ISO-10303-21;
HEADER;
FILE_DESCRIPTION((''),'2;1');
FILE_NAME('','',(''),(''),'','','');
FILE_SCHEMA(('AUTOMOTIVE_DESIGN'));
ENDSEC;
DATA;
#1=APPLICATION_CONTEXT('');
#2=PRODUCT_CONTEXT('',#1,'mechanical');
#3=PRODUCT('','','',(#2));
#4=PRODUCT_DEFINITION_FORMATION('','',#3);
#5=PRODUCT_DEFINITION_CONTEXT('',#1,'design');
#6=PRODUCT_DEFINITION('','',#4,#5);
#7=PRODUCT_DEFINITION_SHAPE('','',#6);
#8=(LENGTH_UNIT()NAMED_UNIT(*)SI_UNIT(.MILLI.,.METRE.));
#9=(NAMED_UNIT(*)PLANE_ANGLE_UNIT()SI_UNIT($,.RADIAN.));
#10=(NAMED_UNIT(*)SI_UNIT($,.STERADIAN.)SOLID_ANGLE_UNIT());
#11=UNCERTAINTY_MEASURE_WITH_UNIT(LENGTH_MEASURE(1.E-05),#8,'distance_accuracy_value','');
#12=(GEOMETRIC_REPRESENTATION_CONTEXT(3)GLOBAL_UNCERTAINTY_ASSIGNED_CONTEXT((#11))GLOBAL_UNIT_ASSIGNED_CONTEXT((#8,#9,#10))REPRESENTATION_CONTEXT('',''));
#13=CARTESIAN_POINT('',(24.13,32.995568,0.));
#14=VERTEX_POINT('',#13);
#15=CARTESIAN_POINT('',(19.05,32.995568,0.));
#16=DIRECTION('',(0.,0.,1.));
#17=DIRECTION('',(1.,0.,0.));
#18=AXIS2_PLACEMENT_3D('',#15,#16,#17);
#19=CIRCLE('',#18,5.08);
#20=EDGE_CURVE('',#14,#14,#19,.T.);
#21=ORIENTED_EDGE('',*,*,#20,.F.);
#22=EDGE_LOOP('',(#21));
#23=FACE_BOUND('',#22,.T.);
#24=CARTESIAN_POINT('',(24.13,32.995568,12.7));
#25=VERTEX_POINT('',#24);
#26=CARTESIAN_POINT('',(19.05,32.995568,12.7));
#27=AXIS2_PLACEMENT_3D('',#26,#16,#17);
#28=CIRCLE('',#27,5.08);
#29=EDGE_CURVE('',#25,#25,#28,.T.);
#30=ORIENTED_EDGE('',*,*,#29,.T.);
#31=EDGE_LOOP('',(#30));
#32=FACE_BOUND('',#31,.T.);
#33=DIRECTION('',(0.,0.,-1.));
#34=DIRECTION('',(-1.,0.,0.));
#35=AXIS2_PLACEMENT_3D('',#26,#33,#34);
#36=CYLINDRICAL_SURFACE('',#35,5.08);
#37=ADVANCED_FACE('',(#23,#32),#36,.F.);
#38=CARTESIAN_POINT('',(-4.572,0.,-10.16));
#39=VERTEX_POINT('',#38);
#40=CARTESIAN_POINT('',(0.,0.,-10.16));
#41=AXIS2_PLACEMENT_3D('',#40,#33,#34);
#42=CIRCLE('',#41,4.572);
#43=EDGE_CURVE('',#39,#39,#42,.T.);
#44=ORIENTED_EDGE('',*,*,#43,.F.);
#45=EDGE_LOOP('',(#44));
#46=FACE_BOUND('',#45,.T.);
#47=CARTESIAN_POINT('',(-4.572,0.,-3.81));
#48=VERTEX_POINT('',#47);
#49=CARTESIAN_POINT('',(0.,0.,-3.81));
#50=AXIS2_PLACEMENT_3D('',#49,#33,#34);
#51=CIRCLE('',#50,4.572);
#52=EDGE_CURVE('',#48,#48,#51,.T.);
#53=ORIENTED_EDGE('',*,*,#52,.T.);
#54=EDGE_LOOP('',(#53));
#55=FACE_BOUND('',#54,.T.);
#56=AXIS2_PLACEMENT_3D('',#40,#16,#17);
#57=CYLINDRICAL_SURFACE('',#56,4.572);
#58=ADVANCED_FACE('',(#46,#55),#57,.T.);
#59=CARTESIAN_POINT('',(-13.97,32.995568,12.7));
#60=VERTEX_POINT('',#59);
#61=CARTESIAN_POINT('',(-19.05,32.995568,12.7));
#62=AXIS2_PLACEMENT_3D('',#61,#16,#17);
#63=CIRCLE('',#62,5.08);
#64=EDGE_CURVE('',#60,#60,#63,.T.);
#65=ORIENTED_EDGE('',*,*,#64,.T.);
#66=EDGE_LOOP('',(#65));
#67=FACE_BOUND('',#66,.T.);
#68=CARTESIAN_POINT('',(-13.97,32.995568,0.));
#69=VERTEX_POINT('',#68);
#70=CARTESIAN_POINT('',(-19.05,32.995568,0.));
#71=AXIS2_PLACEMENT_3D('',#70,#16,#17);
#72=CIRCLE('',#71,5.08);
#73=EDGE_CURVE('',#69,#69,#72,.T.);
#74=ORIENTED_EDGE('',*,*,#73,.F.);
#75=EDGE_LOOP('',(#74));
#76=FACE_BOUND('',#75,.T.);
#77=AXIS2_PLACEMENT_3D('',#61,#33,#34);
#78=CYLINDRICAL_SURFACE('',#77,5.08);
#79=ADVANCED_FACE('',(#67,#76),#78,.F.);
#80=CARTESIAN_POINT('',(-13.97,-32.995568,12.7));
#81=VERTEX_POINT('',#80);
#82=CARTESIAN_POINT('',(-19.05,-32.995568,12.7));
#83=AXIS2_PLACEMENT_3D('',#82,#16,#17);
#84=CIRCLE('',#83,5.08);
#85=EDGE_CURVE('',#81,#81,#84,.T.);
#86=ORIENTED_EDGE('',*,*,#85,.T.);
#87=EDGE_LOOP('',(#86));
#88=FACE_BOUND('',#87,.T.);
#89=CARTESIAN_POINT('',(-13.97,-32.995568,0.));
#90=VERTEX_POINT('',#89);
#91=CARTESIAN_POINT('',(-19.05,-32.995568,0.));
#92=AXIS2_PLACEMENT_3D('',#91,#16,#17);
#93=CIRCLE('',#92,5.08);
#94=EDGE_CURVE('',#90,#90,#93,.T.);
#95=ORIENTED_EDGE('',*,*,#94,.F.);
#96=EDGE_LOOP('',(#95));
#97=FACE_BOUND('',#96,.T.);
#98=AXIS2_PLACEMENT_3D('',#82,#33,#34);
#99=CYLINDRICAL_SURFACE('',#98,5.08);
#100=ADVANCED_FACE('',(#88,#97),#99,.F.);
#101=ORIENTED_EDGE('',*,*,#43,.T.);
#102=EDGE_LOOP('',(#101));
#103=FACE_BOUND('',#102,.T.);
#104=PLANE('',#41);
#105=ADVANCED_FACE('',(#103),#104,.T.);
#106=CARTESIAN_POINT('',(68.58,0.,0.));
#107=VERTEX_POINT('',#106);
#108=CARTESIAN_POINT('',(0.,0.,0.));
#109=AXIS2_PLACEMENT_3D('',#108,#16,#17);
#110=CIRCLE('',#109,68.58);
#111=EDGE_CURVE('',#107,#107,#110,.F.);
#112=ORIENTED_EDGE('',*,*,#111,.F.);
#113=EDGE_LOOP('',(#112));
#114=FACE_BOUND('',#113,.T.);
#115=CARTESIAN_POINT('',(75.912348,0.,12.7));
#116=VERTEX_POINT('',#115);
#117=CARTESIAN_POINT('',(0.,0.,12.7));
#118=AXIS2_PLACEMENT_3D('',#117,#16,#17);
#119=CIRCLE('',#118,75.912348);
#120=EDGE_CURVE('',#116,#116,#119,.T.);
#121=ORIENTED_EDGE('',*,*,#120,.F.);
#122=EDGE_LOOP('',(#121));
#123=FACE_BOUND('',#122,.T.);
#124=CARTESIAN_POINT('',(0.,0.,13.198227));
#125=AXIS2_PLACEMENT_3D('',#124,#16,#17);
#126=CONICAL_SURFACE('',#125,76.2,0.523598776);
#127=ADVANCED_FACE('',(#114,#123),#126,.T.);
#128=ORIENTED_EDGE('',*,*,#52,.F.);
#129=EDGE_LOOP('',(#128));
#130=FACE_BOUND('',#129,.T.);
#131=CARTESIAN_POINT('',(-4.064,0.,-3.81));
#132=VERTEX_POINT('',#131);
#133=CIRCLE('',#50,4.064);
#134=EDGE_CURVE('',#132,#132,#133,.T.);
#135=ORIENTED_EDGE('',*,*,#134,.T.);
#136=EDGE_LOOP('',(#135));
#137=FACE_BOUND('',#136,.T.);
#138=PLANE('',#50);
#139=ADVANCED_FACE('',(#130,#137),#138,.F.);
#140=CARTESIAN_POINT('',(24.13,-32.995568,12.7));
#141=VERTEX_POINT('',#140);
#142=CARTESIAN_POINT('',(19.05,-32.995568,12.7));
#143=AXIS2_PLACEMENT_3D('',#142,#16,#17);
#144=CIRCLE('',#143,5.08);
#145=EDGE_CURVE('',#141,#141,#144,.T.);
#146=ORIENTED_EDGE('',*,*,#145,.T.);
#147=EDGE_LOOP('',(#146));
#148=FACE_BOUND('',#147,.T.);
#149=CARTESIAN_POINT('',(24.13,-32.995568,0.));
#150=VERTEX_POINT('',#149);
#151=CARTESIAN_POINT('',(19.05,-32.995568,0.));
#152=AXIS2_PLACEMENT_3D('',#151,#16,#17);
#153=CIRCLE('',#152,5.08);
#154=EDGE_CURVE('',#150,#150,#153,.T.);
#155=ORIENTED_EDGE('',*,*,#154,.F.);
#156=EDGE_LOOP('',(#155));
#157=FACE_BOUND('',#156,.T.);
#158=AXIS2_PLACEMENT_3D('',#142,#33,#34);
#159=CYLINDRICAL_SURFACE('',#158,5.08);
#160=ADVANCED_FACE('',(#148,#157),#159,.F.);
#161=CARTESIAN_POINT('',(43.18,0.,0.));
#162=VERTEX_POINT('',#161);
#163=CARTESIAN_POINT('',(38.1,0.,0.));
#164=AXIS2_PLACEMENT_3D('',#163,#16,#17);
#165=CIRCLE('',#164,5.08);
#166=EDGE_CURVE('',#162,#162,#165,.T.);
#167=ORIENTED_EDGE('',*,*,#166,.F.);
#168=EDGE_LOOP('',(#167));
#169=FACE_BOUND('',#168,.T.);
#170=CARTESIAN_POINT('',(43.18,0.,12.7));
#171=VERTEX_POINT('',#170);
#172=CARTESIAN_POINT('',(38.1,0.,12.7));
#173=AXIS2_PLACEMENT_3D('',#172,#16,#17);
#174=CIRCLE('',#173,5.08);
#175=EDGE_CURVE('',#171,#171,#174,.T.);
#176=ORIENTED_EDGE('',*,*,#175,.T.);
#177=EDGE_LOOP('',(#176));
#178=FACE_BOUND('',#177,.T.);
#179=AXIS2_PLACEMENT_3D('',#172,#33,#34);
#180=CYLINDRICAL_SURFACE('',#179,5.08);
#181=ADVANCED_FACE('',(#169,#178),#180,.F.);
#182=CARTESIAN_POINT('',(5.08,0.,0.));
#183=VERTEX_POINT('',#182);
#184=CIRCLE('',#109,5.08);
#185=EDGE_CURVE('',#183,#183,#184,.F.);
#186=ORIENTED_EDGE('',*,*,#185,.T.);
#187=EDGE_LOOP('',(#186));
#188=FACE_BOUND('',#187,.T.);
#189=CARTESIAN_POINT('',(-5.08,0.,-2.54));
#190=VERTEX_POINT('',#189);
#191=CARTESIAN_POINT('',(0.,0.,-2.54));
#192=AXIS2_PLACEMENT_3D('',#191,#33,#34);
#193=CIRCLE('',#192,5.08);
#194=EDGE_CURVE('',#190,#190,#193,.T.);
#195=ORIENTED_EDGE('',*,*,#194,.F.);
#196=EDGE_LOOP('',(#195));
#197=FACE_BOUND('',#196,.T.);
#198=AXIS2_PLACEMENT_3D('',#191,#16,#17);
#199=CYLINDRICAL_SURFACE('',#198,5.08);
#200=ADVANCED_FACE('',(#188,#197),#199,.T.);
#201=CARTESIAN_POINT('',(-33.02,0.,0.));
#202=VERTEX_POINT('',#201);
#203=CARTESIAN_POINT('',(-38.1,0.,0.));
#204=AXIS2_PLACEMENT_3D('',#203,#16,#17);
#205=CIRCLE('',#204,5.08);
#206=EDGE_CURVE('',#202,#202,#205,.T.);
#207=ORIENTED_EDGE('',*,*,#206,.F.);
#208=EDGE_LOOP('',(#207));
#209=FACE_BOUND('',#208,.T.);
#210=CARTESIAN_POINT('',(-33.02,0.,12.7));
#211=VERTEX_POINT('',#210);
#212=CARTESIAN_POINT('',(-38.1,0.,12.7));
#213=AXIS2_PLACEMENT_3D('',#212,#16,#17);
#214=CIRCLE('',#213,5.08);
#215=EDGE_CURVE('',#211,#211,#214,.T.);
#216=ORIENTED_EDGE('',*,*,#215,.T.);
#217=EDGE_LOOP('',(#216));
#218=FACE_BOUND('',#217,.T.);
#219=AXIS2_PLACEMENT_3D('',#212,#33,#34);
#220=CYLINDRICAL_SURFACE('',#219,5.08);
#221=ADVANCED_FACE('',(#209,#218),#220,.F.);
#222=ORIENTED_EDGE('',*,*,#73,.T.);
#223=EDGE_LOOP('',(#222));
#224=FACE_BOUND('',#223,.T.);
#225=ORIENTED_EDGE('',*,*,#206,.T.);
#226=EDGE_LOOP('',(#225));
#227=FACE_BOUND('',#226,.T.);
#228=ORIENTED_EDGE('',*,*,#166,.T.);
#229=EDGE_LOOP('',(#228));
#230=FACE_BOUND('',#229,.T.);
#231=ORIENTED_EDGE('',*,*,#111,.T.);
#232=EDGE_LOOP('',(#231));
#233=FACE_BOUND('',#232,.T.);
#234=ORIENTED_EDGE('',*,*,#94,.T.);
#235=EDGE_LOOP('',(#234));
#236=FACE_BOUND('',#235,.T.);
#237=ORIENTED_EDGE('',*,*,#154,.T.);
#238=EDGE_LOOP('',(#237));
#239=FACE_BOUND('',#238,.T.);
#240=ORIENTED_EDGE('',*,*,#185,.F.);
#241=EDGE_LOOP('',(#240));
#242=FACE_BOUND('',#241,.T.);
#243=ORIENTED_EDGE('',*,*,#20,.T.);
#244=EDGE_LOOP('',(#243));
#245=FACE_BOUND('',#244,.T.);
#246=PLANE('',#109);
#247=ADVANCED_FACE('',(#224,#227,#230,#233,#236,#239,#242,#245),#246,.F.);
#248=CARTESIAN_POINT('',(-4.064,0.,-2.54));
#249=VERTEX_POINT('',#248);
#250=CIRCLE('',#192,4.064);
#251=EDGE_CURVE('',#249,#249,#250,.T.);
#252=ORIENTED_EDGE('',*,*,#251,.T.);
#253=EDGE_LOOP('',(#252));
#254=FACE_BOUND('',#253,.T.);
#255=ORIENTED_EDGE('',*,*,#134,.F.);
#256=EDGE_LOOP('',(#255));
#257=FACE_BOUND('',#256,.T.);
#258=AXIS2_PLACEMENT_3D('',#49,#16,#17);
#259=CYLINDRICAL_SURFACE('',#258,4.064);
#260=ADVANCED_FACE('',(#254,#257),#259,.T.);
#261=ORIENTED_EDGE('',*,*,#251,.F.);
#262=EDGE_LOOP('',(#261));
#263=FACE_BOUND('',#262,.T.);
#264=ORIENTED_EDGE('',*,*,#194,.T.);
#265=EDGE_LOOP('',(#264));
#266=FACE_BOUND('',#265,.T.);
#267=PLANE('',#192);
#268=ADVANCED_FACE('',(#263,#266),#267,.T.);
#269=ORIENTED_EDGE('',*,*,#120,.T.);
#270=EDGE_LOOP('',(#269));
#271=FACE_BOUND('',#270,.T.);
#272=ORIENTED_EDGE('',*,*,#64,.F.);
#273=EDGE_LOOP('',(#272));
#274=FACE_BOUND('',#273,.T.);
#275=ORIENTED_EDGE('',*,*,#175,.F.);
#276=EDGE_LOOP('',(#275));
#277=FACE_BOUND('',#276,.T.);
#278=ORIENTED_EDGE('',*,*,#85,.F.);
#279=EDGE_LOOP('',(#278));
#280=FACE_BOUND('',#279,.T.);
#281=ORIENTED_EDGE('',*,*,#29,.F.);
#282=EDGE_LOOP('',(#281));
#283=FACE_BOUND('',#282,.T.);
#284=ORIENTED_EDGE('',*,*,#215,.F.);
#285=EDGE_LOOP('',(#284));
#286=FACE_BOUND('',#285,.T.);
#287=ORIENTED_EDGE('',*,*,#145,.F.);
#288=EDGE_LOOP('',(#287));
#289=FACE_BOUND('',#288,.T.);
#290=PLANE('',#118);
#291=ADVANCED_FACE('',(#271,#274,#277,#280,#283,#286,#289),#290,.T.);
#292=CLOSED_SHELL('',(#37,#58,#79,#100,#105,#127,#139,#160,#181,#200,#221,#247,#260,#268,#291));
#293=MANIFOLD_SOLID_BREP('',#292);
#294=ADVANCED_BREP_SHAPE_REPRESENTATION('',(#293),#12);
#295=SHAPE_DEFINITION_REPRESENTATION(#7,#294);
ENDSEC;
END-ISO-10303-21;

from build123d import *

# Parameters (mm, degrees)
SKETCH1_R           = 76.2
SKETCH1_R_2         = 5.08
BOSS_EXTRUDE1_DEPTH = 12.7
CHAMFER1_SIZE       = 13.198227154
CHAMFER1_SIZE_2     = 7.62
SKETCH3_R           = 5.08
BOSS_EXTRUDE2_DEPTH = 2.54
SKETCH4_R           = 4.064
BOSS_EXTRUDE3_DEPTH = 1.27
SKETCH5_R           = 4.572
BOSS_EXTRUDE4_DEPTH = 6.35


with BuildPart() as part:
    # Sketch1 → Boss-Extrude1 (new body)
    with BuildSketch(Plane.XY):
        Circle(SKETCH1_R)
        with Locations((38.1, 0)):
            Circle(SKETCH1_R_2, mode=Mode.SUBTRACT)
        with Locations((19.05, -32.995567884)):
            Circle(SKETCH1_R_2, mode=Mode.SUBTRACT)
        with Locations((-19.05, -32.995567884)):
            Circle(SKETCH1_R_2, mode=Mode.SUBTRACT)
        with Locations((-38.1, 0)):
            Circle(SKETCH1_R_2, mode=Mode.SUBTRACT)
        with Locations((-19.05, 32.995567884)):
            Circle(SKETCH1_R_2, mode=Mode.SUBTRACT)
        with Locations((19.05, 32.995567884)):
            Circle(SKETCH1_R_2, mode=Mode.SUBTRACT)
    extrude(amount=BOSS_EXTRUDE1_DEPTH)

    # Chamfer1
    # the kernel refuses this chamfer: 13.198227154, 7.62 mm, written as the material it takes off along each edge
    with BuildSketch(Plane(origin=(0, 0, 0), x_dir=(1, 0, 0), z_dir=(0, -1, 0))) as chamfer1_piece_1:
        Polygon((76.2, CHAMFER1_SIZE), (76.2 - CHAMFER1_SIZE_2, 0), (76.2, 0), align=None)
    revolve(axis=Axis((0, 0, 0), (0, 0, 1)), mode=Mode.SUBTRACT)

    # Sketch3 → Boss-Extrude2 (add)
    with BuildSketch(Plane(origin=(0, 0, 0), x_dir=(-1, 0, 0), z_dir=(0, 0, -1))):
        with Locations(Location((0, 0, 0), (0, 0, 180))):
            Circle(SKETCH3_R)
    extrude(amount=BOSS_EXTRUDE2_DEPTH)

    # Sketch4 → Boss-Extrude3 (add)
    with BuildSketch(Plane(origin=(0, 0, -2.54), x_dir=(-1, 0, 0), z_dir=(0, 0, -1))):
        Circle(SKETCH4_R)
    extrude(amount=BOSS_EXTRUDE3_DEPTH)

    # Sketch5 → Boss-Extrude4 (add)
    with BuildSketch(Plane(origin=(0, 0, -3.81), x_dir=(-1, 0, 0), z_dir=(0, 0, -1))):
        Circle(SKETCH5_R)
    extrude(amount=BOSS_EXTRUDE4_DEPTH)


solid = part.part
